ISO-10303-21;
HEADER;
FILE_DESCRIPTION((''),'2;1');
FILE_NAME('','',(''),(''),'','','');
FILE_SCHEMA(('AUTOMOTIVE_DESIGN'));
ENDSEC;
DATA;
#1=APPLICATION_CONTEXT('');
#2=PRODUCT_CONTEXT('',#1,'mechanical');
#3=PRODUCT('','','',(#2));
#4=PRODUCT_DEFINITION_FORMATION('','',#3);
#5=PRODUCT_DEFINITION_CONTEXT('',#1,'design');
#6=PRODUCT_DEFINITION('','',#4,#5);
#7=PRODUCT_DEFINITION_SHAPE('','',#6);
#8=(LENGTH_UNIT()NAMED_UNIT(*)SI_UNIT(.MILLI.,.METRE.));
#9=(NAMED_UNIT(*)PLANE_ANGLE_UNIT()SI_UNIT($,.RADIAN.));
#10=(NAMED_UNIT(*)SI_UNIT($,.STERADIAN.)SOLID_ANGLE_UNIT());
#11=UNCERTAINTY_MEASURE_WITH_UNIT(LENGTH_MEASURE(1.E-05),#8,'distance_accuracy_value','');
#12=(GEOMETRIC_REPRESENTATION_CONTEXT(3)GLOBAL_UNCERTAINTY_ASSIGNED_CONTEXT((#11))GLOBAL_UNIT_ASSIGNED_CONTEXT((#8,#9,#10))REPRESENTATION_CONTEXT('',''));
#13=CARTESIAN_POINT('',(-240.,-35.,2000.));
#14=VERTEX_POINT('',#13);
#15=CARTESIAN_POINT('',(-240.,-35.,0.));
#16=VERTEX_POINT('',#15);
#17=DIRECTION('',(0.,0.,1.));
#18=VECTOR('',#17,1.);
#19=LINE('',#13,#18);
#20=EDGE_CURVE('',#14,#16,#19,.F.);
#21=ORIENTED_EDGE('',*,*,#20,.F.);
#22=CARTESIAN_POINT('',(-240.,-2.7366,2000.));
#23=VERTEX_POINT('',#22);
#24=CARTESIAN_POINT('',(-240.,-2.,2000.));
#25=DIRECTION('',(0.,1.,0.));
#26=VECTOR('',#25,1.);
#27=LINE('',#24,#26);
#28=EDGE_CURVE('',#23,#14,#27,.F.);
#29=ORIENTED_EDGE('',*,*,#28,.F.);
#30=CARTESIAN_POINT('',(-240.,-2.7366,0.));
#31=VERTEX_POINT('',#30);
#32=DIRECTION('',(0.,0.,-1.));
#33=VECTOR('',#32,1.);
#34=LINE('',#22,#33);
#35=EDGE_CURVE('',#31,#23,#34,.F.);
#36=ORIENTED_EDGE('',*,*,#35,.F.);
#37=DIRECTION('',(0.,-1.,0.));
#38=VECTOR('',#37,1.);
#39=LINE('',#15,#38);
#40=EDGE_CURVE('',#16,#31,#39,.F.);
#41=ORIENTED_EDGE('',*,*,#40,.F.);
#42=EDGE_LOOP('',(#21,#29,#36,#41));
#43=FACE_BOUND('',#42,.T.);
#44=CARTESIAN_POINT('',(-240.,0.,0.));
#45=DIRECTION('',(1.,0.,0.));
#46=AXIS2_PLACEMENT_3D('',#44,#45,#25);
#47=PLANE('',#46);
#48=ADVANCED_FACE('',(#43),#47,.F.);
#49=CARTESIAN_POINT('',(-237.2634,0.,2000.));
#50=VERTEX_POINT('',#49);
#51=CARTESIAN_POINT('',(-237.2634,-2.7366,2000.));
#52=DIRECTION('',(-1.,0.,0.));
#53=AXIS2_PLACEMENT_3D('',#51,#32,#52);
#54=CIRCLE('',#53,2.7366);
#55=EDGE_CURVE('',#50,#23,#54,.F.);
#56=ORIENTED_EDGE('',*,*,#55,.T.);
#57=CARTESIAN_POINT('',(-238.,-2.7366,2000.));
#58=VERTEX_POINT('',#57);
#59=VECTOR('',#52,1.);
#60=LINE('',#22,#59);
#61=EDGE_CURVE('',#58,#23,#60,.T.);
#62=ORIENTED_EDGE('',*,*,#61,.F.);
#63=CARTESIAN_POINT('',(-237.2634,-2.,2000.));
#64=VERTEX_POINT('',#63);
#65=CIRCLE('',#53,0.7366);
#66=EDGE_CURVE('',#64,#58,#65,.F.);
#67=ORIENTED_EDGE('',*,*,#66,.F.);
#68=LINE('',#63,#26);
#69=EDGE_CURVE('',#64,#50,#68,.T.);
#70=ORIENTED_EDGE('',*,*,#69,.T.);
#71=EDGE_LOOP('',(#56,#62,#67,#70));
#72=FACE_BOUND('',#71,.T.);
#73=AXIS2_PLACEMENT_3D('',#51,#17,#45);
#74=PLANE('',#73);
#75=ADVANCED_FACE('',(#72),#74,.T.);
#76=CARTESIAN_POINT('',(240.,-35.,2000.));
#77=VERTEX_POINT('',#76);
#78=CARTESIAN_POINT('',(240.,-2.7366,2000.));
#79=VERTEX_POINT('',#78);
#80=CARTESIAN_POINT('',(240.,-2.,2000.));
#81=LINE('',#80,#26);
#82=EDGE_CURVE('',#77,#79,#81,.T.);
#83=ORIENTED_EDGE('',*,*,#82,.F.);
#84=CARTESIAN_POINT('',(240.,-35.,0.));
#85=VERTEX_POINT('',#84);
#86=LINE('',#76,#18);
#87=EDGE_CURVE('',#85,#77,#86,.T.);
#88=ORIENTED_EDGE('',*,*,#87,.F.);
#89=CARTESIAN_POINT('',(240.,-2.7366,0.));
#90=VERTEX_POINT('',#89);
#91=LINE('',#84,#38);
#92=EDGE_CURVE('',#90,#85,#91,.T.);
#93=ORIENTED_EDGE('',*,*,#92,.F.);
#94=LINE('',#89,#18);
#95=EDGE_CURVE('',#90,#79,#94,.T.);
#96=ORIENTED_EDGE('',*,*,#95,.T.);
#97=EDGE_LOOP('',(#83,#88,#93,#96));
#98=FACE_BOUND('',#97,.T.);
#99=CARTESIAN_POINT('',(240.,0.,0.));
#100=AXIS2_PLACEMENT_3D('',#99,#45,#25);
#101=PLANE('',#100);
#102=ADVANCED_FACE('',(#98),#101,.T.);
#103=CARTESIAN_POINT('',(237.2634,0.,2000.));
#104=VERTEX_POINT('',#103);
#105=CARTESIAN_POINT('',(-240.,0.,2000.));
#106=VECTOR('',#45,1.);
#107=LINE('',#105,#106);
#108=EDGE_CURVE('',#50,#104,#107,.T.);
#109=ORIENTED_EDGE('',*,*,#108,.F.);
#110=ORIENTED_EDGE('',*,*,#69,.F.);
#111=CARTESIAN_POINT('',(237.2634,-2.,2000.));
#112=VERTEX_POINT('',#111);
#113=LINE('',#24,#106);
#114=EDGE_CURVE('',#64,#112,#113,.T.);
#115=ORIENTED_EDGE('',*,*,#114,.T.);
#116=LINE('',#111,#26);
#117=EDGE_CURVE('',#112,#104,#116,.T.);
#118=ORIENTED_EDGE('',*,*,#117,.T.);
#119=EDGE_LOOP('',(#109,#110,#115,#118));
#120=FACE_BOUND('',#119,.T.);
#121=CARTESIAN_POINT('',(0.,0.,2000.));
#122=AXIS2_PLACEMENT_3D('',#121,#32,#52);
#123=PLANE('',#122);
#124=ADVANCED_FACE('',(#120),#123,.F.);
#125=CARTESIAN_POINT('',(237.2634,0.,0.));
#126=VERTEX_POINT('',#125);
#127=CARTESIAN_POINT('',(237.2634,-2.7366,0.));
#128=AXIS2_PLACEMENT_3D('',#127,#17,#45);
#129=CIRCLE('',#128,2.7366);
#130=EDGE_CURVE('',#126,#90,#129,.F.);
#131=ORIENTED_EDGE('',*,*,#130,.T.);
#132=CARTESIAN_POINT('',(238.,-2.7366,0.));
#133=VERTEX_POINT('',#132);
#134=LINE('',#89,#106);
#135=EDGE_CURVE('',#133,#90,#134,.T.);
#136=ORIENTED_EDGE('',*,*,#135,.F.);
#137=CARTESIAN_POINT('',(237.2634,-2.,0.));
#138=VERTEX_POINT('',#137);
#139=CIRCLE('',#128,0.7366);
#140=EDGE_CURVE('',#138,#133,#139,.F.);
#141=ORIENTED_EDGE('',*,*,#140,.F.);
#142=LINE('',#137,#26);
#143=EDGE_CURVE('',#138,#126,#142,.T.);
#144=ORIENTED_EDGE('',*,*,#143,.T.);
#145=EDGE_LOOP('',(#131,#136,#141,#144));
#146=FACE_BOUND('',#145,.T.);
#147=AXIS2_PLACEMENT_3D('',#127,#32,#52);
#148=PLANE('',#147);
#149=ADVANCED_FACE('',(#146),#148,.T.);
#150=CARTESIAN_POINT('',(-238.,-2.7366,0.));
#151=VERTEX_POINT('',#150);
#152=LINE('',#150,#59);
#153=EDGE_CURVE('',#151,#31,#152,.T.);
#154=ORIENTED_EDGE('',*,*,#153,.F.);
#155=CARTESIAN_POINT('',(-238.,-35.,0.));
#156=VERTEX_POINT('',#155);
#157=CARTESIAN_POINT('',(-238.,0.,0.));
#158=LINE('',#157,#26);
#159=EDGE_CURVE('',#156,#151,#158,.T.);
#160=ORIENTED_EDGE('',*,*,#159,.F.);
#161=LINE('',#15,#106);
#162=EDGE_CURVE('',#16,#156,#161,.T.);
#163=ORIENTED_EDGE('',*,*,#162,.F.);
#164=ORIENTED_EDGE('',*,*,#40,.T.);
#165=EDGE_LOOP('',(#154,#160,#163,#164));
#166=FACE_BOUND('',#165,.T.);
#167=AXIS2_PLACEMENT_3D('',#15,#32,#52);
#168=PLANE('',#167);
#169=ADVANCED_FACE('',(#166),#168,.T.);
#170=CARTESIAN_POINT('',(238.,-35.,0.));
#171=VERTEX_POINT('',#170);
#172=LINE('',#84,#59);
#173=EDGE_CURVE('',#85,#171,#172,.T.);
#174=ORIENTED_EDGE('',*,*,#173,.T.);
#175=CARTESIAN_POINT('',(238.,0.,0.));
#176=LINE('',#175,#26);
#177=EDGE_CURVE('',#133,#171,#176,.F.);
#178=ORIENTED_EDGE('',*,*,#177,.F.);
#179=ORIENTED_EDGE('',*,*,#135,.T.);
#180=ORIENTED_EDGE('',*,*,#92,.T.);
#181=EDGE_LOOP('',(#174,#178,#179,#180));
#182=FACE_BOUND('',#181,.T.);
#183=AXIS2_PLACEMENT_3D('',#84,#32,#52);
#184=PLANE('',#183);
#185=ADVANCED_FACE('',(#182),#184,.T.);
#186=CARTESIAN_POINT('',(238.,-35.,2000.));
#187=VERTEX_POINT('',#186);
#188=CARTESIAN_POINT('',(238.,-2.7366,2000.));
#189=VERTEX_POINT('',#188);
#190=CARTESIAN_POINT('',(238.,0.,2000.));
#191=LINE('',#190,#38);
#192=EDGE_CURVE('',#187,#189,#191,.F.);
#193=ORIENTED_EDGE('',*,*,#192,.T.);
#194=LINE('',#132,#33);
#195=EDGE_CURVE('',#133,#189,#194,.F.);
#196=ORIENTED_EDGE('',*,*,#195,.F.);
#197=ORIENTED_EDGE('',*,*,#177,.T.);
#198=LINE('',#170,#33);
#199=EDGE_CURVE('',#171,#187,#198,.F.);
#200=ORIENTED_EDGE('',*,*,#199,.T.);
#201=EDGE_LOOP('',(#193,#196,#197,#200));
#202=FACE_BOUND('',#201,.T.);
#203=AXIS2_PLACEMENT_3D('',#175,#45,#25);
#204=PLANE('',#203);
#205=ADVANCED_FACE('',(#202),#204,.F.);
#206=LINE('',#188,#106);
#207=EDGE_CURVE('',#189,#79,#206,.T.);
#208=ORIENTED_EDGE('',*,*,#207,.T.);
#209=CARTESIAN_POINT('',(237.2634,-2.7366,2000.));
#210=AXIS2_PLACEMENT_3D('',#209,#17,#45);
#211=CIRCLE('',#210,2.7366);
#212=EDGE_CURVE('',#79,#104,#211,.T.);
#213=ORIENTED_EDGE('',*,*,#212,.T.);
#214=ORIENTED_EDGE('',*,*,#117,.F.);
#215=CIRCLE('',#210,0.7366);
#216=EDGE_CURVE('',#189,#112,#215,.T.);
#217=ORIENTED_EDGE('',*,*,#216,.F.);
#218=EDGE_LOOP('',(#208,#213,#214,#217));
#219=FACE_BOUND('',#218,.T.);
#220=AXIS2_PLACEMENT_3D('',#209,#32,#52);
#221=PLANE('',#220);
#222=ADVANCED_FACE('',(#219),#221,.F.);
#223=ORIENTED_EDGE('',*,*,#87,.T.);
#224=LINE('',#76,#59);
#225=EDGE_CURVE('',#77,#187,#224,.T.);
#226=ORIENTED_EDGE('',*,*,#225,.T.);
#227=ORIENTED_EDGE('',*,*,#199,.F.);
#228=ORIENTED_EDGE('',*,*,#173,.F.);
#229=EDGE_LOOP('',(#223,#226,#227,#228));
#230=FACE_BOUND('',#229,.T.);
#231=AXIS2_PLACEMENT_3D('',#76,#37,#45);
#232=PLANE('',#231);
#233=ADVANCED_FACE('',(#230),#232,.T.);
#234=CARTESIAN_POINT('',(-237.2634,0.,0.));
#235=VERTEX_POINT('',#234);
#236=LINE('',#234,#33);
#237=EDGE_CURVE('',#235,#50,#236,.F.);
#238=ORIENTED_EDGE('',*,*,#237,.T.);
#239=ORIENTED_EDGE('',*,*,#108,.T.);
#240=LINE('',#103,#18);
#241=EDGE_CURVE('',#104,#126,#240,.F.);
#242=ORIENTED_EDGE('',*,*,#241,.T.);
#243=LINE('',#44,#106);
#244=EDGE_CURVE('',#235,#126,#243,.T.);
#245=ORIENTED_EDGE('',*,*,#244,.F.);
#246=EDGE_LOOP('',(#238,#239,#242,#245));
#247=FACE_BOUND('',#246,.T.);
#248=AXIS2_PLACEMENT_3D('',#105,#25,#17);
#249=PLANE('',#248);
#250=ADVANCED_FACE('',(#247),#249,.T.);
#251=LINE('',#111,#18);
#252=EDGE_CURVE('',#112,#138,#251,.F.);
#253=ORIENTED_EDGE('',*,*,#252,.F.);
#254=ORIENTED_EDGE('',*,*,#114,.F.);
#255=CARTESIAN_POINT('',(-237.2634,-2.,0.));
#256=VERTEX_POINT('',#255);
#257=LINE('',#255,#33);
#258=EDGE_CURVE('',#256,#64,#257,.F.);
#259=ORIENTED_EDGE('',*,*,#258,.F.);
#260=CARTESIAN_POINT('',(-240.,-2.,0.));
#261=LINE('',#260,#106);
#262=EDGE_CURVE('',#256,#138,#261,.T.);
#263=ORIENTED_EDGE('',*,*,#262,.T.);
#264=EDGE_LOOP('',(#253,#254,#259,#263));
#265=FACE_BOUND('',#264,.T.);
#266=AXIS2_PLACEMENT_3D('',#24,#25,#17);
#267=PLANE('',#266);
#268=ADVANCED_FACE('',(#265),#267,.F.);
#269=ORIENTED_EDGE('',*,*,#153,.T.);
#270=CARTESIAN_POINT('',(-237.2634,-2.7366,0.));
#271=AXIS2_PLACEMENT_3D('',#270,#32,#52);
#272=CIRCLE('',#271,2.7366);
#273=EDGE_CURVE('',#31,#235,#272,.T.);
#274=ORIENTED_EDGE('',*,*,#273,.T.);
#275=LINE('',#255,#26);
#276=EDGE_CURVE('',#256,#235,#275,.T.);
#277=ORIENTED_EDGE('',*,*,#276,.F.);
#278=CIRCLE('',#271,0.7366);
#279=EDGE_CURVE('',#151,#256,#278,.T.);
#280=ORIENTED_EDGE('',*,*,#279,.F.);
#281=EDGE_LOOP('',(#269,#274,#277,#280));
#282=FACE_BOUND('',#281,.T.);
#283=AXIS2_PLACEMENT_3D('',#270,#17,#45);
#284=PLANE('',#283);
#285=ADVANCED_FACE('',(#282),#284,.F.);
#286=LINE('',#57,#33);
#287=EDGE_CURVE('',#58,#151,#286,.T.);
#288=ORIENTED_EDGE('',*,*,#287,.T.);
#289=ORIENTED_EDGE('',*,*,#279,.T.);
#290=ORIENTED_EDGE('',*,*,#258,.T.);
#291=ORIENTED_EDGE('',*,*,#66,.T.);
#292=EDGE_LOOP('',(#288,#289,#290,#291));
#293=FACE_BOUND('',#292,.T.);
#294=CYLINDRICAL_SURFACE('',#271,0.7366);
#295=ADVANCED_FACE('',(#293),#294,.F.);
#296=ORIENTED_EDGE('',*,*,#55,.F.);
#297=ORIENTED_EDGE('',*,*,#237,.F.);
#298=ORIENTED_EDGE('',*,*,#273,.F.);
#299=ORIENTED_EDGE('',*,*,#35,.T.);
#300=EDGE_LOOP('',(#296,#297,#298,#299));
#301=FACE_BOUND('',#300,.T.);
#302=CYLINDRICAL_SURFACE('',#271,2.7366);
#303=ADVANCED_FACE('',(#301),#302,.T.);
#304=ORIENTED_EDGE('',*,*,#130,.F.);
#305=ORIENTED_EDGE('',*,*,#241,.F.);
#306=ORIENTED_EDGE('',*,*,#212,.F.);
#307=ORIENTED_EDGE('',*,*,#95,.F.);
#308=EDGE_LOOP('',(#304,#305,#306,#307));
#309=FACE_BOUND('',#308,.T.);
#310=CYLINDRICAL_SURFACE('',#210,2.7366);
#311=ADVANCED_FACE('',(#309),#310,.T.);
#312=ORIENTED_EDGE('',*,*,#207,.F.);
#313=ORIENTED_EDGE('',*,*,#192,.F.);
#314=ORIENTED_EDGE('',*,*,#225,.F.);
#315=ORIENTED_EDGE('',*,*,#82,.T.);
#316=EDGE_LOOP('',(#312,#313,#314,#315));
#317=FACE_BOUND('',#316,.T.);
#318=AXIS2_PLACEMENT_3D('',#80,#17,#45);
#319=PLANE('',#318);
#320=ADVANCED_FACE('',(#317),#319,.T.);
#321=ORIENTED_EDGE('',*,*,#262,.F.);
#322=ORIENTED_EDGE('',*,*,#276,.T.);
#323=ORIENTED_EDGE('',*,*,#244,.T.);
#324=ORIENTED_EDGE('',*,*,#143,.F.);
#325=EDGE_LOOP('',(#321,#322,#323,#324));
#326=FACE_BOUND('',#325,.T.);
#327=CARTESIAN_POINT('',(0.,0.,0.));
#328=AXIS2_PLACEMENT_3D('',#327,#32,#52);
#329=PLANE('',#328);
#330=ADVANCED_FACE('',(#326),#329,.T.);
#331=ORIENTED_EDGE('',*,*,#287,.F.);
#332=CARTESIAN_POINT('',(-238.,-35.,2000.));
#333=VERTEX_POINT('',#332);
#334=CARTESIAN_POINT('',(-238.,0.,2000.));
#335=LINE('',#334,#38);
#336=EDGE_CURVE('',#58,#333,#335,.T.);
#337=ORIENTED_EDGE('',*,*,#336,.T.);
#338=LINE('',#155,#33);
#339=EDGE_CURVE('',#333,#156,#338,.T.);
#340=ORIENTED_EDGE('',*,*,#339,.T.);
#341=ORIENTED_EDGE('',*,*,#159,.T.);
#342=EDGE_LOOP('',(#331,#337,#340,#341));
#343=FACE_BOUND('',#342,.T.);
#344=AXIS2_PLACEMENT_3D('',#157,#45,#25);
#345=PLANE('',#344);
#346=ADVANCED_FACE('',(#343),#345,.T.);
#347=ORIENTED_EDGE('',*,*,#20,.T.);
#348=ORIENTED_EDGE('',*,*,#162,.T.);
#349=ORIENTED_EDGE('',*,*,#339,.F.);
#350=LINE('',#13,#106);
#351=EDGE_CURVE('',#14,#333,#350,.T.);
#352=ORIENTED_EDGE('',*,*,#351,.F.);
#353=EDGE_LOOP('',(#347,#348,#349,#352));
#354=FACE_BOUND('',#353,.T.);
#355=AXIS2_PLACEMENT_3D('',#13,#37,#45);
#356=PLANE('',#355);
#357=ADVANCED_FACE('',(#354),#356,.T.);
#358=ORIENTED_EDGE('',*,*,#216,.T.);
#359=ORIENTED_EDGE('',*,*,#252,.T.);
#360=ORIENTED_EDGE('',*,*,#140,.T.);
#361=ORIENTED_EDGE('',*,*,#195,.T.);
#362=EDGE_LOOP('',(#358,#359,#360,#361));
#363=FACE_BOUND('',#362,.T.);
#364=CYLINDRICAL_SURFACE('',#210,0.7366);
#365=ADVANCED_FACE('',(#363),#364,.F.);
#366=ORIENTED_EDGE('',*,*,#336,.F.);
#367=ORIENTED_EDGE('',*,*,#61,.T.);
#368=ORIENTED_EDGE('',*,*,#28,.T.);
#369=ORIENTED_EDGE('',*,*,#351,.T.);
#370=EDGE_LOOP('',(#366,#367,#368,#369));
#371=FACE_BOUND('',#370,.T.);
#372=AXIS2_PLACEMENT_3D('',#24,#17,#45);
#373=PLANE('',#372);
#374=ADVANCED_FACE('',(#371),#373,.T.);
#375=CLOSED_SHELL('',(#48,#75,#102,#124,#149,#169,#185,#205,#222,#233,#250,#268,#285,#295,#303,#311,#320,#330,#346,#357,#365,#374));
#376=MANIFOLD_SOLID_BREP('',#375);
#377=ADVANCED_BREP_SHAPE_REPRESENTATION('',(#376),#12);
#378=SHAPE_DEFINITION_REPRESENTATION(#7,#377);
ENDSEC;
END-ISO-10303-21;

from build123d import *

# Parameters (mm, degrees)
SKETCH1_W                      = 480
SKETCH1_H                      = 2
BASE_FLANGE1_DEPTH             = 2000
EDGE_FLANGE1_STRIP_W           = 9.4732
EDGE_FLANGE1_STRIP_H           = 2
EDGE_FLANGE1_STRIP_CUT_DEPTH   = 2000
EDGE_FLANGE1_STRIP_2_W         = 9.4732
EDGE_FLANGE1_STRIP_2_H         = 2
EDGE_FLANGE1_STRIP_CUT_2_DEPTH = 2000
EDGE_FLANGE1_DEPTH             = 2000
EDGE_FLANGE1_BEND_DEPTH        = 2000


# Sheet-metal steps are written as plain solids
with BuildPart() as part:
    # Sketch1 → Base-Flange1 (new body)
    with BuildSketch(Plane.XY):
        with Locations((0, -1)):
            Rectangle(SKETCH1_W, SKETCH1_H)
    extrude(amount=BASE_FLANGE1_DEPTH)

    # Edge-Flange1 strip (across the edge) → Edge-Flange1 strip cut (cut)
    with BuildSketch(Plane(origin=(240, -2, 0), x_dir=(-1, 0, 0), z_dir=(0, 0, 1))):
        with Locations((-2, -1)):
            Rectangle(EDGE_FLANGE1_STRIP_W, EDGE_FLANGE1_STRIP_H)
    extrude(amount=EDGE_FLANGE1_STRIP_CUT_DEPTH, mode=Mode.SUBTRACT)

    # Edge-Flange1 strip 2 (across the edge) → Edge-Flange1 strip cut 2 (cut)
    with BuildSketch(Plane(origin=(-240, -2, 2000), x_dir=(1, 0, 0), z_dir=(0, 0, -1))):
        with Locations((-2, -1)):
            Rectangle(EDGE_FLANGE1_STRIP_2_W, EDGE_FLANGE1_STRIP_2_H)
    extrude(amount=EDGE_FLANGE1_STRIP_CUT_2_DEPTH, mode=Mode.SUBTRACT)

    # Edge-Flange1 section (across the edge) → Edge-Flange1 (add)
    with BuildSketch(Plane(origin=(240, -2, 0), x_dir=(-1, 0, 0), z_dir=(0, 0, 1))):
        with BuildLine():
            Line((0, 0.7366), (0, 33))
            Line((0, 33), (2, 33))
            Line((2, 33), (2, 0.7366))
            ThreePointArc((2, 0.7366), (2.215745145, 0.215745145), (2.7366, 0))
            Line((2.7366, 0), (2.7366, -2))
            ThreePointArc((2.7366, -2), (0.801531583, -1.198468417), (0, 0.7366))
        make_face()
    extrude(amount=EDGE_FLANGE1_DEPTH)

    # Edge-Flange1 section 2 (across the edge) → Edge-Flange1 bend (add)
    with BuildSketch(Plane(origin=(-240, -2, 2000), x_dir=(1, 0, 0), z_dir=(0, 0, -1))):
        with BuildLine():
            Line((0, 0.7366), (0, 33))
            Line((0, 33), (2, 33))
            Line((2, 33), (2, 0.7366))
            ThreePointArc((2, 0.7366), (2.215745145, 0.215745145), (2.7366, 0))
            Line((2.7366, 0), (2.7366, -2))
            ThreePointArc((2.7366, -2), (0.801531583, -1.198468417), (0, 0.7366))
        make_face()
    extrude(amount=EDGE_FLANGE1_BEND_DEPTH)


solid = part.part
